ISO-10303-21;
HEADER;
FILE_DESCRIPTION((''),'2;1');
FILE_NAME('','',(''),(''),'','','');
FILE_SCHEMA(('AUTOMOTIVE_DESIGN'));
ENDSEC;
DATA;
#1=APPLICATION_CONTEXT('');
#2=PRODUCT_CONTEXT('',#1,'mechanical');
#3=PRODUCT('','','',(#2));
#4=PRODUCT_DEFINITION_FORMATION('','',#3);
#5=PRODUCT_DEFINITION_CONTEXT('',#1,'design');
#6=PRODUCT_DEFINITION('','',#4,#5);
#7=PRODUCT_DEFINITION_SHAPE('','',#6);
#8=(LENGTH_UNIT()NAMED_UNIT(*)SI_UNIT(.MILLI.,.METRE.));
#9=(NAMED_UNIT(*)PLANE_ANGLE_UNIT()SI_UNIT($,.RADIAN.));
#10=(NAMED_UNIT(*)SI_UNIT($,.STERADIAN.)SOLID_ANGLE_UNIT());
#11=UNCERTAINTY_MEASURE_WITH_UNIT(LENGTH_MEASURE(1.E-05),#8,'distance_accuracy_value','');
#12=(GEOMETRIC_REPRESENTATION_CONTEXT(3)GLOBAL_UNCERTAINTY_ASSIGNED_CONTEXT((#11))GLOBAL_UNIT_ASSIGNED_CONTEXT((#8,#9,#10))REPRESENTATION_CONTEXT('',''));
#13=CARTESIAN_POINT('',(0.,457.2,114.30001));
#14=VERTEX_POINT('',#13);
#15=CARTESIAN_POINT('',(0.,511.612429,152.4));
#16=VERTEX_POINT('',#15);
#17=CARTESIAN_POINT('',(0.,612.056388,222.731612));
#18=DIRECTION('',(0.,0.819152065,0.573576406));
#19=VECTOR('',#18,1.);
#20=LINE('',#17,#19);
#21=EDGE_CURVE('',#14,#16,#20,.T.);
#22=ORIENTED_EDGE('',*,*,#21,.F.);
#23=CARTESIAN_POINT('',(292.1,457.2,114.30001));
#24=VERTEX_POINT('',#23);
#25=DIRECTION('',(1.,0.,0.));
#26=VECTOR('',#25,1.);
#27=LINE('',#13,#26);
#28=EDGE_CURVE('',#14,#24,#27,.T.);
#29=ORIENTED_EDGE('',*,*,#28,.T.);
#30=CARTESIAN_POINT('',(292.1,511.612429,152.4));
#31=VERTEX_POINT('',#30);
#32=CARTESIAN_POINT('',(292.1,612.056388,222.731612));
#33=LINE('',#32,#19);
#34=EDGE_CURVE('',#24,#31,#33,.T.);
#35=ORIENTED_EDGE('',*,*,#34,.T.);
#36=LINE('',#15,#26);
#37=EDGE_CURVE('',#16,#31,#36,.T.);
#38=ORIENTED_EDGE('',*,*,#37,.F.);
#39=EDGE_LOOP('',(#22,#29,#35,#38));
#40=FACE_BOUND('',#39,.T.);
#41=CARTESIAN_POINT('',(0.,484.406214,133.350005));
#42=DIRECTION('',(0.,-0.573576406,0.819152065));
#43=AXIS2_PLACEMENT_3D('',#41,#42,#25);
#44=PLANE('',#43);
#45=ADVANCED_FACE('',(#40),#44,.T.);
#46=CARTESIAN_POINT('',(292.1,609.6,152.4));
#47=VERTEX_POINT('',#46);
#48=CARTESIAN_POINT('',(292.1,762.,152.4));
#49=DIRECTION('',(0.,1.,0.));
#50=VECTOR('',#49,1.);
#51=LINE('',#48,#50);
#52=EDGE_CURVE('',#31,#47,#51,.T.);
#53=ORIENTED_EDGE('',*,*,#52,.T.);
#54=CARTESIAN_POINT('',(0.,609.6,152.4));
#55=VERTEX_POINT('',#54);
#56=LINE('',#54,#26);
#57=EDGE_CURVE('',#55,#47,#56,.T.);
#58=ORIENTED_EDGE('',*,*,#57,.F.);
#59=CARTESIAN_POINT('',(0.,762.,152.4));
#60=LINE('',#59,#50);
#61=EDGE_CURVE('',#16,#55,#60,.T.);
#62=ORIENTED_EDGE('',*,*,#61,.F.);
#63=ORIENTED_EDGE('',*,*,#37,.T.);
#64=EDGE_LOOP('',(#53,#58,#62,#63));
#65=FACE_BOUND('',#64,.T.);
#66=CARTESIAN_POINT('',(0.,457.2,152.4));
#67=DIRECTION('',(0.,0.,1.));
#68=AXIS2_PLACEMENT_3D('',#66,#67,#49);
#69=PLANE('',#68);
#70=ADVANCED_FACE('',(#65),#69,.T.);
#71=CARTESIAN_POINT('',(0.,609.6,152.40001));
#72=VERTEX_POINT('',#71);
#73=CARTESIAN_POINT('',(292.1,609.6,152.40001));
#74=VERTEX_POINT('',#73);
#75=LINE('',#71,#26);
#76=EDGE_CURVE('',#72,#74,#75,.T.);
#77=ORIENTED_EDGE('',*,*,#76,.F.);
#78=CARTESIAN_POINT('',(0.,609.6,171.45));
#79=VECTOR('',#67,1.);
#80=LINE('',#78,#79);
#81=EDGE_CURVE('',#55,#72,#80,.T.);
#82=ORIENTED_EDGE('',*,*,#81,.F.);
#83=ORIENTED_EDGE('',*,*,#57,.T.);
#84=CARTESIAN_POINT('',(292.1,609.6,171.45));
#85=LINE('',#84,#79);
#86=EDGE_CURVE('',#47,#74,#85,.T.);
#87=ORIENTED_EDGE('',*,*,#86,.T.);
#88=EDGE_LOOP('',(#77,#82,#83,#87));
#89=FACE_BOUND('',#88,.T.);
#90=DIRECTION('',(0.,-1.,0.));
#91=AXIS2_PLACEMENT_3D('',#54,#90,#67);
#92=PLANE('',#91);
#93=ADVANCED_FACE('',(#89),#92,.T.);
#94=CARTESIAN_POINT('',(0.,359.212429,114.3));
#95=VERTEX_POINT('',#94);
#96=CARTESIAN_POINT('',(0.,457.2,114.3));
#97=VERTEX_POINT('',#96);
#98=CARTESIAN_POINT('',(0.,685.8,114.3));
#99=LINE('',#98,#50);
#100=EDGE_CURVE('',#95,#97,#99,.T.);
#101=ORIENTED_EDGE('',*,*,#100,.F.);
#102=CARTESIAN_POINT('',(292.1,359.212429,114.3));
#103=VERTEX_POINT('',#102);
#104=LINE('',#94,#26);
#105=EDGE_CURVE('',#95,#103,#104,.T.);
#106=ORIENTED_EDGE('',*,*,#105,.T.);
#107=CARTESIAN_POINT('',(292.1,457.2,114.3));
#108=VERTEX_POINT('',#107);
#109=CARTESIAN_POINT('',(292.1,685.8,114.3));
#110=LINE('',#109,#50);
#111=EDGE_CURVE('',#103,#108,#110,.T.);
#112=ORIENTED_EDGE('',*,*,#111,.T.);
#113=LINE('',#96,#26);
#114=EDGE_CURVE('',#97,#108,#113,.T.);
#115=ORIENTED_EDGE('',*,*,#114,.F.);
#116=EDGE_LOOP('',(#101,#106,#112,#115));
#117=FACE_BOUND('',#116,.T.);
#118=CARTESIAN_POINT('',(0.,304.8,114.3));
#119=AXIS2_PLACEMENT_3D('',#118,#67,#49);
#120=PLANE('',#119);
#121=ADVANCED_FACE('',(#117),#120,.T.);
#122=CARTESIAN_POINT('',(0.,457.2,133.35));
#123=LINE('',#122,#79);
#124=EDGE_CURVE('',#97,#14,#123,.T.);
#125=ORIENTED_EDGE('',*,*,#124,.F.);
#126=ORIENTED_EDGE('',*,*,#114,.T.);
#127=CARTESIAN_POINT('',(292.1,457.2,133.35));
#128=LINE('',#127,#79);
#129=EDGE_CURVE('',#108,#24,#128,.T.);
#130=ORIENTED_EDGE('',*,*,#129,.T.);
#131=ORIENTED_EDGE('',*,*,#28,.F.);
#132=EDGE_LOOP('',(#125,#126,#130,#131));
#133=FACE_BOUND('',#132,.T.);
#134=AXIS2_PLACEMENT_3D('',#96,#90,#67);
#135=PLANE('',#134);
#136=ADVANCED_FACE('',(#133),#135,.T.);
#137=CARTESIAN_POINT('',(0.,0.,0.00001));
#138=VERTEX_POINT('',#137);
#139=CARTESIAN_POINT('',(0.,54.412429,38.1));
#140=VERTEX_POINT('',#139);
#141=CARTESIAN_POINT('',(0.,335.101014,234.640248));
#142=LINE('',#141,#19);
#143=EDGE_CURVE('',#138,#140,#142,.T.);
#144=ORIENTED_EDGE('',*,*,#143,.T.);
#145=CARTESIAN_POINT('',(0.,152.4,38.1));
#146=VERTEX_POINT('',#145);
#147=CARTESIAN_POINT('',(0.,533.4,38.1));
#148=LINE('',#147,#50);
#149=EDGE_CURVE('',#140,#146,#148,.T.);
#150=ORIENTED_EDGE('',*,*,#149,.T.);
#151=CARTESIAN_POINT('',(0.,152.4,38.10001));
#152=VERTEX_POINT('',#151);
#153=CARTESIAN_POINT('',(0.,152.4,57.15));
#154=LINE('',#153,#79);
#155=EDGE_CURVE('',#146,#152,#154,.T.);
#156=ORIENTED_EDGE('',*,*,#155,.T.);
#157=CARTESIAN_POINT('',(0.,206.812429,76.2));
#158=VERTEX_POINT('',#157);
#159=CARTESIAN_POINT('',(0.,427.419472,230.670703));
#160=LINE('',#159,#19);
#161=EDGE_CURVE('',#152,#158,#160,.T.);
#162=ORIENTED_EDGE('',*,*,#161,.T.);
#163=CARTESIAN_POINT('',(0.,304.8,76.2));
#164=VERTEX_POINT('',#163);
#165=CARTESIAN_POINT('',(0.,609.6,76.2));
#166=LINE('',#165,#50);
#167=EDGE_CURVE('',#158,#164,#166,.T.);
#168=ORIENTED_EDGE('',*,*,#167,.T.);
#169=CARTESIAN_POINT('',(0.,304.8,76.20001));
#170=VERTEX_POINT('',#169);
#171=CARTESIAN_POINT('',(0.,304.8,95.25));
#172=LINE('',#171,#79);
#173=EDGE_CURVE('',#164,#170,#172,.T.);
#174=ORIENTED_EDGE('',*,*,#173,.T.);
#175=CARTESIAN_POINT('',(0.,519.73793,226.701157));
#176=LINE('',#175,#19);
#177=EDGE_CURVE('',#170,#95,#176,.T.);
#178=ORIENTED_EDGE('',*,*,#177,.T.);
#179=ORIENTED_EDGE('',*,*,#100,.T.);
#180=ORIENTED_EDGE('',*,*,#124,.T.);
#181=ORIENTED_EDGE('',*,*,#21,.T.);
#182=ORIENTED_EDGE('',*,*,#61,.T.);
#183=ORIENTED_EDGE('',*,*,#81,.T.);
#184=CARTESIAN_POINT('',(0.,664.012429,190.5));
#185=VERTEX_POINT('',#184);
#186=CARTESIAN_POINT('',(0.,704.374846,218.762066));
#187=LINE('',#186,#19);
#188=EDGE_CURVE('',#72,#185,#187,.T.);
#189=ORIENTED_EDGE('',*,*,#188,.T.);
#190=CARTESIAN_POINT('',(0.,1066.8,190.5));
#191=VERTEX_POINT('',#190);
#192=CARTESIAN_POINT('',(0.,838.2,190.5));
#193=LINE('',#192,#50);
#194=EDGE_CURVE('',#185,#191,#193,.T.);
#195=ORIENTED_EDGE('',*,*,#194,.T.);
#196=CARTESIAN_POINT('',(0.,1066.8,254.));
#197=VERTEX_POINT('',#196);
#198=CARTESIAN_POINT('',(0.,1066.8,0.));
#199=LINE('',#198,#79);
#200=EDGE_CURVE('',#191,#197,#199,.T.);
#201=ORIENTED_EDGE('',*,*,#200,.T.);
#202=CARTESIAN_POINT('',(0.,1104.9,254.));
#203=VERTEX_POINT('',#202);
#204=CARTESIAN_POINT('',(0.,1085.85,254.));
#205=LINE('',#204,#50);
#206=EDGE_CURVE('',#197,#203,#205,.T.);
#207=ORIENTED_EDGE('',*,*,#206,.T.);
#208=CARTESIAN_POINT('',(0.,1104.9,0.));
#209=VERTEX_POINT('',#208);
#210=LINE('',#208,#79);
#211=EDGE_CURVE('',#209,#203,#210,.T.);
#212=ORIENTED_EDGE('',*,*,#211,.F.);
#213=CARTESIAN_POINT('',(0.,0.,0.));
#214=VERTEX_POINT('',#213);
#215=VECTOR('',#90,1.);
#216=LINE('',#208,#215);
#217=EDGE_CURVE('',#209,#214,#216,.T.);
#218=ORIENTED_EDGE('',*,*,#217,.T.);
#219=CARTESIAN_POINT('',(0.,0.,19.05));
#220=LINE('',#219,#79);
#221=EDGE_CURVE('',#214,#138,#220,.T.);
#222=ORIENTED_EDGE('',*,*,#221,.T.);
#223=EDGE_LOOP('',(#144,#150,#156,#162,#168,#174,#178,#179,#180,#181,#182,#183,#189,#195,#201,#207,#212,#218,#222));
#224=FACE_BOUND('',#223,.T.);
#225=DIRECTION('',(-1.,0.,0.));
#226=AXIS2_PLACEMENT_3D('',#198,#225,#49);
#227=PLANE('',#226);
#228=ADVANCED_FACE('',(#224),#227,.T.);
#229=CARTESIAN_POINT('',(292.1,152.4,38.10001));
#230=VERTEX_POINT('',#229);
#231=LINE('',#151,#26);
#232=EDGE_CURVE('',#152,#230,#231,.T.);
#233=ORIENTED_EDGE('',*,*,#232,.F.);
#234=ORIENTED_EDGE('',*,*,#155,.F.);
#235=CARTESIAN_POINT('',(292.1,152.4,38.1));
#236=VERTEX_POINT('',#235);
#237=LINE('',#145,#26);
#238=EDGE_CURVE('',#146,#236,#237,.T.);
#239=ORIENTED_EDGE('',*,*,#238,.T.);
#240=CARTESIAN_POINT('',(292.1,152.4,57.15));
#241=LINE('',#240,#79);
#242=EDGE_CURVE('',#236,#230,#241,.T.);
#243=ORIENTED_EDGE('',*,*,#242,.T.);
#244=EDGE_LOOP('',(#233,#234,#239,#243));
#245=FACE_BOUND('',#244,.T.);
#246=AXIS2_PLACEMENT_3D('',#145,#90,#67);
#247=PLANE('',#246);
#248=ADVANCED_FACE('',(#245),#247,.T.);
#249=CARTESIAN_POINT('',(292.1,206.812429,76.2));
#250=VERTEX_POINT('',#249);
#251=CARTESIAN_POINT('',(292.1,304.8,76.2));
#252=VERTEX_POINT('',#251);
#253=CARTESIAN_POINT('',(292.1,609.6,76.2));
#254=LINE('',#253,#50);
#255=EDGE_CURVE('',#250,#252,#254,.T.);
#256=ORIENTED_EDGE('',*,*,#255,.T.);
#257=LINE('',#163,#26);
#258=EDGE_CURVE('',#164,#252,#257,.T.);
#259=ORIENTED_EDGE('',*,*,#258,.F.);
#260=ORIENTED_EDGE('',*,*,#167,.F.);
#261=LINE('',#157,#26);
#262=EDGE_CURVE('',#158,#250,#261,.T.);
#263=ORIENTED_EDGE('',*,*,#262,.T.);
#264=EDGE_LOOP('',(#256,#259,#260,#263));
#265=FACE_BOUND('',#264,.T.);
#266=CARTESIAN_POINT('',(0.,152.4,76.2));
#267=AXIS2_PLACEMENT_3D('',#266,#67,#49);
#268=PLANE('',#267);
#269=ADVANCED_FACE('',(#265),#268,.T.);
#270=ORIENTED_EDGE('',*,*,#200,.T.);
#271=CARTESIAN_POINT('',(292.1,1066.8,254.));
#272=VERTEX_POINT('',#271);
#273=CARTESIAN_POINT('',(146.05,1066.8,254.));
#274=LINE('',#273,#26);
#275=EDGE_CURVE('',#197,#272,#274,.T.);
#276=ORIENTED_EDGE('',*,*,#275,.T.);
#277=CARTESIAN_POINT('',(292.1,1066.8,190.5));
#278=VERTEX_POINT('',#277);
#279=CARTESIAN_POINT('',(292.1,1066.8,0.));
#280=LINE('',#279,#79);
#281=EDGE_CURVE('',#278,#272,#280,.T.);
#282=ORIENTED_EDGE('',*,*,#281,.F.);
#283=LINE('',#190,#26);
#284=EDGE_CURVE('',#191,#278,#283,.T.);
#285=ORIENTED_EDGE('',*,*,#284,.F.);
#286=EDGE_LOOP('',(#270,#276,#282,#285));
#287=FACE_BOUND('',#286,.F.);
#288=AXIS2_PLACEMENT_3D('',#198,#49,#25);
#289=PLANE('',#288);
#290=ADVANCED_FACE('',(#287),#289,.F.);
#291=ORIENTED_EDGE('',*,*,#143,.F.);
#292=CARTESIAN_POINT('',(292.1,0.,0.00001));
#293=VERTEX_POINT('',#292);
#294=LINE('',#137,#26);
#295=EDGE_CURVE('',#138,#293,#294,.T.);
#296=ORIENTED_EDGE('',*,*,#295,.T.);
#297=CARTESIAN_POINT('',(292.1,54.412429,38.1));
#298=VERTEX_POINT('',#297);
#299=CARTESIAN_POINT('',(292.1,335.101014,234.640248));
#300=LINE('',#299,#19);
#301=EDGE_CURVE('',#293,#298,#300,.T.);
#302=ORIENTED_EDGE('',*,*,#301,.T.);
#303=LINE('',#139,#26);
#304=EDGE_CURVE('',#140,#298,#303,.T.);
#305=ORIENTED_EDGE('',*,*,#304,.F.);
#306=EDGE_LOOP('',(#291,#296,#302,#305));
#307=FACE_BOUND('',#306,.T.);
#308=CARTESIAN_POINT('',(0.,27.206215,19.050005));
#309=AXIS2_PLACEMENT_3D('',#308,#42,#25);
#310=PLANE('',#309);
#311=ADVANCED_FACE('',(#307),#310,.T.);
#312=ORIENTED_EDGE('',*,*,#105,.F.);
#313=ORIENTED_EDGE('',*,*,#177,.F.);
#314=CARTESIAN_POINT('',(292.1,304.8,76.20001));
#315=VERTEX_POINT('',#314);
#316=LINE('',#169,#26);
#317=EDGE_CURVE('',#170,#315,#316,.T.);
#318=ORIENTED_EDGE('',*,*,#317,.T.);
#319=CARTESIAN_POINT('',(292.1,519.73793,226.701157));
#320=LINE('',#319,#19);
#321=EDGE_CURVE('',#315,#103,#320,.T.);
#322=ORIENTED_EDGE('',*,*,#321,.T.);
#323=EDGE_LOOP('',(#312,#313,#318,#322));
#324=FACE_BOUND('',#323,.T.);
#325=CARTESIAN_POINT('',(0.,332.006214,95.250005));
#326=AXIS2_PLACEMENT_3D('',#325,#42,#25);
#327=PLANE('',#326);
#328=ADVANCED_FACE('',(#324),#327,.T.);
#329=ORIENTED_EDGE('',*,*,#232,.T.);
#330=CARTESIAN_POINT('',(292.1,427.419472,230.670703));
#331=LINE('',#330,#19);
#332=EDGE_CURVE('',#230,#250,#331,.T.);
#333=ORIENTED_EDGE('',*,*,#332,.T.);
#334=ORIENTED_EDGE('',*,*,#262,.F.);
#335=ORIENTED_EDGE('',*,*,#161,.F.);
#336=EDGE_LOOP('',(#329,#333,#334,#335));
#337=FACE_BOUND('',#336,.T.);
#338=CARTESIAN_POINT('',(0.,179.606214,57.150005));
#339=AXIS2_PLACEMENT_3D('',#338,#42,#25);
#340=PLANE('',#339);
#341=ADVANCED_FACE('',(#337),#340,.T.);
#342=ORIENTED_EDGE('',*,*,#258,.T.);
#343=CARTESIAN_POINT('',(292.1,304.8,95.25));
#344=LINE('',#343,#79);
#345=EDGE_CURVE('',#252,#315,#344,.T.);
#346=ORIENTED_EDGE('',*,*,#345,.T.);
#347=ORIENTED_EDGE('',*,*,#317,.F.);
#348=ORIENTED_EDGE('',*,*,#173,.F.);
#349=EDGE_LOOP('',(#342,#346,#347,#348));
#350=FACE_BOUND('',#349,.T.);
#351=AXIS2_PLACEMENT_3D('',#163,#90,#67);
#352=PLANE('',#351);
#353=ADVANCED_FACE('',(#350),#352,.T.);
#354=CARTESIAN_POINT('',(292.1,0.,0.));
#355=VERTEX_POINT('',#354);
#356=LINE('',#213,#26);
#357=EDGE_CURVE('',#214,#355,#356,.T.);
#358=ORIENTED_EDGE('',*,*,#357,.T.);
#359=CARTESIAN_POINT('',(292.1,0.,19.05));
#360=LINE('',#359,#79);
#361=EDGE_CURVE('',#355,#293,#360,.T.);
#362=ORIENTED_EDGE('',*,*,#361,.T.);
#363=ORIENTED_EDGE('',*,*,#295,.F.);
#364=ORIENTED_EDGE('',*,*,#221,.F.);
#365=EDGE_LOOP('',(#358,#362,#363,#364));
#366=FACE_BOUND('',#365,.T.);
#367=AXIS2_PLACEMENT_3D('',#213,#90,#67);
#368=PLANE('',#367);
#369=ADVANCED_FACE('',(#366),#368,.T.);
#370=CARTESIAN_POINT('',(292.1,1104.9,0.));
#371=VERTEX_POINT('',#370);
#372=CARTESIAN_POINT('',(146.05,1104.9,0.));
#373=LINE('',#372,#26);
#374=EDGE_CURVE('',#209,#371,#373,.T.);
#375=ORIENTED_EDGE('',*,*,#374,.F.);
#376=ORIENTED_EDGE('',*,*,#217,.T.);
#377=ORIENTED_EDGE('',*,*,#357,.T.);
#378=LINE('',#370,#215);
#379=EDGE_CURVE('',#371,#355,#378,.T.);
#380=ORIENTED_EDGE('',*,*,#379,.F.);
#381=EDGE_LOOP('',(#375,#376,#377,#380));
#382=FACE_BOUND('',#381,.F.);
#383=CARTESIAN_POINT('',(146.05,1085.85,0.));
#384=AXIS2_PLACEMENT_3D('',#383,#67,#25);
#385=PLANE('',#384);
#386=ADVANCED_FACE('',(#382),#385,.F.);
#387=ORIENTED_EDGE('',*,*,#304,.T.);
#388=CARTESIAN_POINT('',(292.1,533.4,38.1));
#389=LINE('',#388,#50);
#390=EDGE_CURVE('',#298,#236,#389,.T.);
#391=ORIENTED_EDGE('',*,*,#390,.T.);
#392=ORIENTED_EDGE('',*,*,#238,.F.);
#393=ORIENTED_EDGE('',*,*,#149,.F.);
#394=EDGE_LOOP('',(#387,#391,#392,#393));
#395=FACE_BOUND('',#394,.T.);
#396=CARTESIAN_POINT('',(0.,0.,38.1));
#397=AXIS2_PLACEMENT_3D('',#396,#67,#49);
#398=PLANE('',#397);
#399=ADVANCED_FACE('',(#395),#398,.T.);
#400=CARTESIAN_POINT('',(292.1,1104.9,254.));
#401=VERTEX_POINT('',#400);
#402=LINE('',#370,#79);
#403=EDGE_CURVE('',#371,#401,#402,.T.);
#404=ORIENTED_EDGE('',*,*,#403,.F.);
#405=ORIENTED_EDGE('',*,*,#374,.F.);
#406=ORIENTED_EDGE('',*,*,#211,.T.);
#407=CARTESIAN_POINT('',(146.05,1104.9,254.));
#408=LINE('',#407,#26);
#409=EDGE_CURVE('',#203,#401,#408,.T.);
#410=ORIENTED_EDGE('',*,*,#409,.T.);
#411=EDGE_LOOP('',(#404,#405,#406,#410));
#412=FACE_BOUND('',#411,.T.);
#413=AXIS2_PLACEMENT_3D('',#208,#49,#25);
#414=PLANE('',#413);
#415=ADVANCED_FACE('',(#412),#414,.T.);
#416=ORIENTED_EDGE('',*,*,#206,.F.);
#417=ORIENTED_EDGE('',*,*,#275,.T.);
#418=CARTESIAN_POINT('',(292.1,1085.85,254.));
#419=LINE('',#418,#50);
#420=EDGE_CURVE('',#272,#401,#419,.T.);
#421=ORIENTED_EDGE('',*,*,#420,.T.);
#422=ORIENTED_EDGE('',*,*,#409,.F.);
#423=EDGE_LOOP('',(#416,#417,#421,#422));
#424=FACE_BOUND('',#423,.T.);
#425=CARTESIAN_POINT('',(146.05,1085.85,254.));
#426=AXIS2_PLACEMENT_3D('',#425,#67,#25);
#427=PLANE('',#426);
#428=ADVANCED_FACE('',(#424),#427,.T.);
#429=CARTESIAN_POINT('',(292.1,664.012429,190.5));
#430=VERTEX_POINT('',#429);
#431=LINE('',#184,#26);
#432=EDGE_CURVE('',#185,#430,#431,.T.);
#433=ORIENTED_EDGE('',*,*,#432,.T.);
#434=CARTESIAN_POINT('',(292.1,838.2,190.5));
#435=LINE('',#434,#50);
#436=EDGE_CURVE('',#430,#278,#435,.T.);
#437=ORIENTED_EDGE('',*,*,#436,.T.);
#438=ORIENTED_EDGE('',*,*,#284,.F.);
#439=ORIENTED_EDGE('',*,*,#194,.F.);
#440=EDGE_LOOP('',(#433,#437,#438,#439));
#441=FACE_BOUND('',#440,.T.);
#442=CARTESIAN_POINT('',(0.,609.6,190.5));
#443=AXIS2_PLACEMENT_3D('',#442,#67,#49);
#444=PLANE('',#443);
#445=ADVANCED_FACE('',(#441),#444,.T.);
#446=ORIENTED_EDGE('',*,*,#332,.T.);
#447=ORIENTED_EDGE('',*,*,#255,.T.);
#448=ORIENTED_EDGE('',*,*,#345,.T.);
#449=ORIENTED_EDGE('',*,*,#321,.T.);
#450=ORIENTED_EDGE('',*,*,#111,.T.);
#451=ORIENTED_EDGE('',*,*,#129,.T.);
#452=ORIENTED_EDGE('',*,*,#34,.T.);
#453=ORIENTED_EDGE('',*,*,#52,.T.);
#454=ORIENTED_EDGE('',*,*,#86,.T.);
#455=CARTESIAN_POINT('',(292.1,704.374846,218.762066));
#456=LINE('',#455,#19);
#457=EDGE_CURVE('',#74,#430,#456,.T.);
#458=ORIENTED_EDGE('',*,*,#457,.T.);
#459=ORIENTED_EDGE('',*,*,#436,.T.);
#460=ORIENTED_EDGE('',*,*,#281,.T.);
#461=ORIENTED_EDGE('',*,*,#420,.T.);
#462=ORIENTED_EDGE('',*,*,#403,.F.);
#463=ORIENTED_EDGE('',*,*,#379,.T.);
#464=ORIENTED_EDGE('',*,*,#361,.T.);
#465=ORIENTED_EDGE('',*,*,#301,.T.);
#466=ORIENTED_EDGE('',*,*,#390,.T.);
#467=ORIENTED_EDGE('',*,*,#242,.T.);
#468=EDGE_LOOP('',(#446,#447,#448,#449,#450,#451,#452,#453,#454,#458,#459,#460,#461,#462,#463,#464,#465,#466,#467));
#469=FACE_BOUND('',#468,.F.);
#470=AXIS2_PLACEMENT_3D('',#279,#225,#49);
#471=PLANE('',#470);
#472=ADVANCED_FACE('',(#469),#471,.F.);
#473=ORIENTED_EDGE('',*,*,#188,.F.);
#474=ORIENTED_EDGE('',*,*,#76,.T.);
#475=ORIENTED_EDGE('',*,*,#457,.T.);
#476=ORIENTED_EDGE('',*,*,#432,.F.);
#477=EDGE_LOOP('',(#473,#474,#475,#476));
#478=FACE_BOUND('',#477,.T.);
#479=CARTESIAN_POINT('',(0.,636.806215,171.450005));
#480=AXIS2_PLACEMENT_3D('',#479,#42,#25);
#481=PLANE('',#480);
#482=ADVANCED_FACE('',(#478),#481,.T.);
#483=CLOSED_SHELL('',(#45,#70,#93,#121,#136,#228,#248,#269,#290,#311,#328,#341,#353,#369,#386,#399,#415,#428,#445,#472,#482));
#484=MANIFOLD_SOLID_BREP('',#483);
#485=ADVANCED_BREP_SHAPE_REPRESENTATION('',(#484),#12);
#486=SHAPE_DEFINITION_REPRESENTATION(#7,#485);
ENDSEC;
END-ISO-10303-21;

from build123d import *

# Parameters (mm, degrees)
F0_W        = 1066.8
F0_H        = 38.1
F1_DEPTH    = 292.1
F2_W        = 914.4
F2_H        = 38.1
F3_DEPTH    = 292.1
F4_W        = 762
F4_H        = 38.1
F5_DEPTH    = 292.1
F6_W        = 609.6
F6_H        = 38.1
F7_DEPTH    = 292.1
F8_W        = 457.2
F8_H        = 38.1
F9_DEPTH    = 292.1
F10_SIZE2   = 54.412429
F10_SIZE    = 38.09999
F10_2_SIZE2 = 54.412429
F10_2_SIZE  = 38.09999
F10_3_SIZE2 = 54.412429
F10_3_SIZE  = 38.09999
F10_4_SIZE2 = 54.412429
F10_4_SIZE  = 38.09999
F10_5_SIZE2 = 54.412429
F10_5_SIZE  = 38.09999
F11_W       = 292.1000000001
F11_H       = 38.1
F12_DEPTH   = 254


# Not quite as in the source:
# - a fillet or chamfer is up to 0.001 mm smaller than in the source, because OpenCascade refuses the exact size


with BuildPart() as f1:
    # F0 (on Right) → F1 (new body)
    with BuildSketch(Plane.YZ):
        with Locations((533.4, 19.05)):
            Rectangle(F0_W, F0_H)
    extrude(amount=F1_DEPTH)

    # F2 (on Right) → F3 (join, through all)
    with BuildSketch(Plane.YZ):
        with Locations((609.6, 57.15)):
            Rectangle(F2_W, F2_H)
    extrude(amount=F3_DEPTH)

    # F4 (on Right) → F5 (join, through all)
    with BuildSketch(Plane.YZ):
        with Locations((685.8, 95.25)):
            Rectangle(F4_W, F4_H)
    extrude(amount=F5_DEPTH)

    # F6 (on Right) → F7 (join, through all)
    with BuildSketch(Plane.YZ):
        with Locations((762, 133.35)):
            Rectangle(F6_W, F6_H)
    extrude(amount=F7_DEPTH)

    # F8 (on Right) → F9 (join, through all)
    with BuildSketch(Plane.YZ):
        with Locations((838.2, 171.45)):
            Rectangle(F8_W, F8_H)
    extrude(amount=F9_DEPTH)

    # F10 (size 38.1 and 54.4124390569 in the source; OpenCascade refuses exactly that, so slightly less here)
    f10_edges = [f1.edges().sort_by_distance(p)[0] for p in [
        (146.05, 0, 38.1),
    ]]
    f10_side = f1.faces().sort_by_distance((146.05, 0, 19.05))[0]
    chamfer(f10_edges, length=F10_SIZE, length2=F10_SIZE2, reference=f10_side)

    # F10#2 (size 38.1 and 54.4124390569 in the source; OpenCascade refuses exactly that, so slightly less here)
    f10_2_edges = [f1.edges().sort_by_distance(p)[0] for p in [
        (146.05, 152.4, 76.2),
    ]]
    f10_2_side = f1.faces().sort_by_distance((146.05, 152.4, 57.15))[0]
    chamfer(f10_2_edges, length=F10_2_SIZE, length2=F10_2_SIZE2, reference=f10_2_side)

    # F10#3 (size 38.1 and 54.4124390569 in the source; OpenCascade refuses exactly that, so slightly less here)
    f10_3_edges = [f1.edges().sort_by_distance(p)[0] for p in [
        (146.05, 304.8, 114.3),
    ]]
    f10_3_side = f1.faces().sort_by_distance((146.05, 304.8, 95.25))[0]
    chamfer(f10_3_edges, length=F10_3_SIZE, length2=F10_3_SIZE2, reference=f10_3_side)

    # F10#4 (size 38.1 and 54.4124390569 in the source; OpenCascade refuses exactly that, so slightly less here)
    f10_4_edges = [f1.edges().sort_by_distance(p)[0] for p in [
        (146.05, 457.2, 152.4),
    ]]
    f10_4_side = f1.faces().sort_by_distance((146.05, 457.2, 133.35))[0]
    chamfer(f10_4_edges, length=F10_4_SIZE, length2=F10_4_SIZE2, reference=f10_4_side)

    # F10#5 (size 38.1 and 54.4124390569 in the source; OpenCascade refuses exactly that, so slightly less here)
    f10_5_edges = [f1.edges().sort_by_distance(p)[0] for p in [
        (146.05, 609.6, 190.5),
    ]]
    f10_5_side = f1.faces().sort_by_distance((146.05, 609.6, 171.45))[0]
    chamfer(f10_5_edges, length=F10_5_SIZE, length2=F10_5_SIZE2, reference=f10_5_side)

    # F11 (on Top) → F12 (join)
    with BuildSketch(Plane.XY):
        with Locations((146.0500000001, 1085.85)):
            Rectangle(F11_W, F11_H)
    extrude(amount=F12_DEPTH)


solid = f1.part
